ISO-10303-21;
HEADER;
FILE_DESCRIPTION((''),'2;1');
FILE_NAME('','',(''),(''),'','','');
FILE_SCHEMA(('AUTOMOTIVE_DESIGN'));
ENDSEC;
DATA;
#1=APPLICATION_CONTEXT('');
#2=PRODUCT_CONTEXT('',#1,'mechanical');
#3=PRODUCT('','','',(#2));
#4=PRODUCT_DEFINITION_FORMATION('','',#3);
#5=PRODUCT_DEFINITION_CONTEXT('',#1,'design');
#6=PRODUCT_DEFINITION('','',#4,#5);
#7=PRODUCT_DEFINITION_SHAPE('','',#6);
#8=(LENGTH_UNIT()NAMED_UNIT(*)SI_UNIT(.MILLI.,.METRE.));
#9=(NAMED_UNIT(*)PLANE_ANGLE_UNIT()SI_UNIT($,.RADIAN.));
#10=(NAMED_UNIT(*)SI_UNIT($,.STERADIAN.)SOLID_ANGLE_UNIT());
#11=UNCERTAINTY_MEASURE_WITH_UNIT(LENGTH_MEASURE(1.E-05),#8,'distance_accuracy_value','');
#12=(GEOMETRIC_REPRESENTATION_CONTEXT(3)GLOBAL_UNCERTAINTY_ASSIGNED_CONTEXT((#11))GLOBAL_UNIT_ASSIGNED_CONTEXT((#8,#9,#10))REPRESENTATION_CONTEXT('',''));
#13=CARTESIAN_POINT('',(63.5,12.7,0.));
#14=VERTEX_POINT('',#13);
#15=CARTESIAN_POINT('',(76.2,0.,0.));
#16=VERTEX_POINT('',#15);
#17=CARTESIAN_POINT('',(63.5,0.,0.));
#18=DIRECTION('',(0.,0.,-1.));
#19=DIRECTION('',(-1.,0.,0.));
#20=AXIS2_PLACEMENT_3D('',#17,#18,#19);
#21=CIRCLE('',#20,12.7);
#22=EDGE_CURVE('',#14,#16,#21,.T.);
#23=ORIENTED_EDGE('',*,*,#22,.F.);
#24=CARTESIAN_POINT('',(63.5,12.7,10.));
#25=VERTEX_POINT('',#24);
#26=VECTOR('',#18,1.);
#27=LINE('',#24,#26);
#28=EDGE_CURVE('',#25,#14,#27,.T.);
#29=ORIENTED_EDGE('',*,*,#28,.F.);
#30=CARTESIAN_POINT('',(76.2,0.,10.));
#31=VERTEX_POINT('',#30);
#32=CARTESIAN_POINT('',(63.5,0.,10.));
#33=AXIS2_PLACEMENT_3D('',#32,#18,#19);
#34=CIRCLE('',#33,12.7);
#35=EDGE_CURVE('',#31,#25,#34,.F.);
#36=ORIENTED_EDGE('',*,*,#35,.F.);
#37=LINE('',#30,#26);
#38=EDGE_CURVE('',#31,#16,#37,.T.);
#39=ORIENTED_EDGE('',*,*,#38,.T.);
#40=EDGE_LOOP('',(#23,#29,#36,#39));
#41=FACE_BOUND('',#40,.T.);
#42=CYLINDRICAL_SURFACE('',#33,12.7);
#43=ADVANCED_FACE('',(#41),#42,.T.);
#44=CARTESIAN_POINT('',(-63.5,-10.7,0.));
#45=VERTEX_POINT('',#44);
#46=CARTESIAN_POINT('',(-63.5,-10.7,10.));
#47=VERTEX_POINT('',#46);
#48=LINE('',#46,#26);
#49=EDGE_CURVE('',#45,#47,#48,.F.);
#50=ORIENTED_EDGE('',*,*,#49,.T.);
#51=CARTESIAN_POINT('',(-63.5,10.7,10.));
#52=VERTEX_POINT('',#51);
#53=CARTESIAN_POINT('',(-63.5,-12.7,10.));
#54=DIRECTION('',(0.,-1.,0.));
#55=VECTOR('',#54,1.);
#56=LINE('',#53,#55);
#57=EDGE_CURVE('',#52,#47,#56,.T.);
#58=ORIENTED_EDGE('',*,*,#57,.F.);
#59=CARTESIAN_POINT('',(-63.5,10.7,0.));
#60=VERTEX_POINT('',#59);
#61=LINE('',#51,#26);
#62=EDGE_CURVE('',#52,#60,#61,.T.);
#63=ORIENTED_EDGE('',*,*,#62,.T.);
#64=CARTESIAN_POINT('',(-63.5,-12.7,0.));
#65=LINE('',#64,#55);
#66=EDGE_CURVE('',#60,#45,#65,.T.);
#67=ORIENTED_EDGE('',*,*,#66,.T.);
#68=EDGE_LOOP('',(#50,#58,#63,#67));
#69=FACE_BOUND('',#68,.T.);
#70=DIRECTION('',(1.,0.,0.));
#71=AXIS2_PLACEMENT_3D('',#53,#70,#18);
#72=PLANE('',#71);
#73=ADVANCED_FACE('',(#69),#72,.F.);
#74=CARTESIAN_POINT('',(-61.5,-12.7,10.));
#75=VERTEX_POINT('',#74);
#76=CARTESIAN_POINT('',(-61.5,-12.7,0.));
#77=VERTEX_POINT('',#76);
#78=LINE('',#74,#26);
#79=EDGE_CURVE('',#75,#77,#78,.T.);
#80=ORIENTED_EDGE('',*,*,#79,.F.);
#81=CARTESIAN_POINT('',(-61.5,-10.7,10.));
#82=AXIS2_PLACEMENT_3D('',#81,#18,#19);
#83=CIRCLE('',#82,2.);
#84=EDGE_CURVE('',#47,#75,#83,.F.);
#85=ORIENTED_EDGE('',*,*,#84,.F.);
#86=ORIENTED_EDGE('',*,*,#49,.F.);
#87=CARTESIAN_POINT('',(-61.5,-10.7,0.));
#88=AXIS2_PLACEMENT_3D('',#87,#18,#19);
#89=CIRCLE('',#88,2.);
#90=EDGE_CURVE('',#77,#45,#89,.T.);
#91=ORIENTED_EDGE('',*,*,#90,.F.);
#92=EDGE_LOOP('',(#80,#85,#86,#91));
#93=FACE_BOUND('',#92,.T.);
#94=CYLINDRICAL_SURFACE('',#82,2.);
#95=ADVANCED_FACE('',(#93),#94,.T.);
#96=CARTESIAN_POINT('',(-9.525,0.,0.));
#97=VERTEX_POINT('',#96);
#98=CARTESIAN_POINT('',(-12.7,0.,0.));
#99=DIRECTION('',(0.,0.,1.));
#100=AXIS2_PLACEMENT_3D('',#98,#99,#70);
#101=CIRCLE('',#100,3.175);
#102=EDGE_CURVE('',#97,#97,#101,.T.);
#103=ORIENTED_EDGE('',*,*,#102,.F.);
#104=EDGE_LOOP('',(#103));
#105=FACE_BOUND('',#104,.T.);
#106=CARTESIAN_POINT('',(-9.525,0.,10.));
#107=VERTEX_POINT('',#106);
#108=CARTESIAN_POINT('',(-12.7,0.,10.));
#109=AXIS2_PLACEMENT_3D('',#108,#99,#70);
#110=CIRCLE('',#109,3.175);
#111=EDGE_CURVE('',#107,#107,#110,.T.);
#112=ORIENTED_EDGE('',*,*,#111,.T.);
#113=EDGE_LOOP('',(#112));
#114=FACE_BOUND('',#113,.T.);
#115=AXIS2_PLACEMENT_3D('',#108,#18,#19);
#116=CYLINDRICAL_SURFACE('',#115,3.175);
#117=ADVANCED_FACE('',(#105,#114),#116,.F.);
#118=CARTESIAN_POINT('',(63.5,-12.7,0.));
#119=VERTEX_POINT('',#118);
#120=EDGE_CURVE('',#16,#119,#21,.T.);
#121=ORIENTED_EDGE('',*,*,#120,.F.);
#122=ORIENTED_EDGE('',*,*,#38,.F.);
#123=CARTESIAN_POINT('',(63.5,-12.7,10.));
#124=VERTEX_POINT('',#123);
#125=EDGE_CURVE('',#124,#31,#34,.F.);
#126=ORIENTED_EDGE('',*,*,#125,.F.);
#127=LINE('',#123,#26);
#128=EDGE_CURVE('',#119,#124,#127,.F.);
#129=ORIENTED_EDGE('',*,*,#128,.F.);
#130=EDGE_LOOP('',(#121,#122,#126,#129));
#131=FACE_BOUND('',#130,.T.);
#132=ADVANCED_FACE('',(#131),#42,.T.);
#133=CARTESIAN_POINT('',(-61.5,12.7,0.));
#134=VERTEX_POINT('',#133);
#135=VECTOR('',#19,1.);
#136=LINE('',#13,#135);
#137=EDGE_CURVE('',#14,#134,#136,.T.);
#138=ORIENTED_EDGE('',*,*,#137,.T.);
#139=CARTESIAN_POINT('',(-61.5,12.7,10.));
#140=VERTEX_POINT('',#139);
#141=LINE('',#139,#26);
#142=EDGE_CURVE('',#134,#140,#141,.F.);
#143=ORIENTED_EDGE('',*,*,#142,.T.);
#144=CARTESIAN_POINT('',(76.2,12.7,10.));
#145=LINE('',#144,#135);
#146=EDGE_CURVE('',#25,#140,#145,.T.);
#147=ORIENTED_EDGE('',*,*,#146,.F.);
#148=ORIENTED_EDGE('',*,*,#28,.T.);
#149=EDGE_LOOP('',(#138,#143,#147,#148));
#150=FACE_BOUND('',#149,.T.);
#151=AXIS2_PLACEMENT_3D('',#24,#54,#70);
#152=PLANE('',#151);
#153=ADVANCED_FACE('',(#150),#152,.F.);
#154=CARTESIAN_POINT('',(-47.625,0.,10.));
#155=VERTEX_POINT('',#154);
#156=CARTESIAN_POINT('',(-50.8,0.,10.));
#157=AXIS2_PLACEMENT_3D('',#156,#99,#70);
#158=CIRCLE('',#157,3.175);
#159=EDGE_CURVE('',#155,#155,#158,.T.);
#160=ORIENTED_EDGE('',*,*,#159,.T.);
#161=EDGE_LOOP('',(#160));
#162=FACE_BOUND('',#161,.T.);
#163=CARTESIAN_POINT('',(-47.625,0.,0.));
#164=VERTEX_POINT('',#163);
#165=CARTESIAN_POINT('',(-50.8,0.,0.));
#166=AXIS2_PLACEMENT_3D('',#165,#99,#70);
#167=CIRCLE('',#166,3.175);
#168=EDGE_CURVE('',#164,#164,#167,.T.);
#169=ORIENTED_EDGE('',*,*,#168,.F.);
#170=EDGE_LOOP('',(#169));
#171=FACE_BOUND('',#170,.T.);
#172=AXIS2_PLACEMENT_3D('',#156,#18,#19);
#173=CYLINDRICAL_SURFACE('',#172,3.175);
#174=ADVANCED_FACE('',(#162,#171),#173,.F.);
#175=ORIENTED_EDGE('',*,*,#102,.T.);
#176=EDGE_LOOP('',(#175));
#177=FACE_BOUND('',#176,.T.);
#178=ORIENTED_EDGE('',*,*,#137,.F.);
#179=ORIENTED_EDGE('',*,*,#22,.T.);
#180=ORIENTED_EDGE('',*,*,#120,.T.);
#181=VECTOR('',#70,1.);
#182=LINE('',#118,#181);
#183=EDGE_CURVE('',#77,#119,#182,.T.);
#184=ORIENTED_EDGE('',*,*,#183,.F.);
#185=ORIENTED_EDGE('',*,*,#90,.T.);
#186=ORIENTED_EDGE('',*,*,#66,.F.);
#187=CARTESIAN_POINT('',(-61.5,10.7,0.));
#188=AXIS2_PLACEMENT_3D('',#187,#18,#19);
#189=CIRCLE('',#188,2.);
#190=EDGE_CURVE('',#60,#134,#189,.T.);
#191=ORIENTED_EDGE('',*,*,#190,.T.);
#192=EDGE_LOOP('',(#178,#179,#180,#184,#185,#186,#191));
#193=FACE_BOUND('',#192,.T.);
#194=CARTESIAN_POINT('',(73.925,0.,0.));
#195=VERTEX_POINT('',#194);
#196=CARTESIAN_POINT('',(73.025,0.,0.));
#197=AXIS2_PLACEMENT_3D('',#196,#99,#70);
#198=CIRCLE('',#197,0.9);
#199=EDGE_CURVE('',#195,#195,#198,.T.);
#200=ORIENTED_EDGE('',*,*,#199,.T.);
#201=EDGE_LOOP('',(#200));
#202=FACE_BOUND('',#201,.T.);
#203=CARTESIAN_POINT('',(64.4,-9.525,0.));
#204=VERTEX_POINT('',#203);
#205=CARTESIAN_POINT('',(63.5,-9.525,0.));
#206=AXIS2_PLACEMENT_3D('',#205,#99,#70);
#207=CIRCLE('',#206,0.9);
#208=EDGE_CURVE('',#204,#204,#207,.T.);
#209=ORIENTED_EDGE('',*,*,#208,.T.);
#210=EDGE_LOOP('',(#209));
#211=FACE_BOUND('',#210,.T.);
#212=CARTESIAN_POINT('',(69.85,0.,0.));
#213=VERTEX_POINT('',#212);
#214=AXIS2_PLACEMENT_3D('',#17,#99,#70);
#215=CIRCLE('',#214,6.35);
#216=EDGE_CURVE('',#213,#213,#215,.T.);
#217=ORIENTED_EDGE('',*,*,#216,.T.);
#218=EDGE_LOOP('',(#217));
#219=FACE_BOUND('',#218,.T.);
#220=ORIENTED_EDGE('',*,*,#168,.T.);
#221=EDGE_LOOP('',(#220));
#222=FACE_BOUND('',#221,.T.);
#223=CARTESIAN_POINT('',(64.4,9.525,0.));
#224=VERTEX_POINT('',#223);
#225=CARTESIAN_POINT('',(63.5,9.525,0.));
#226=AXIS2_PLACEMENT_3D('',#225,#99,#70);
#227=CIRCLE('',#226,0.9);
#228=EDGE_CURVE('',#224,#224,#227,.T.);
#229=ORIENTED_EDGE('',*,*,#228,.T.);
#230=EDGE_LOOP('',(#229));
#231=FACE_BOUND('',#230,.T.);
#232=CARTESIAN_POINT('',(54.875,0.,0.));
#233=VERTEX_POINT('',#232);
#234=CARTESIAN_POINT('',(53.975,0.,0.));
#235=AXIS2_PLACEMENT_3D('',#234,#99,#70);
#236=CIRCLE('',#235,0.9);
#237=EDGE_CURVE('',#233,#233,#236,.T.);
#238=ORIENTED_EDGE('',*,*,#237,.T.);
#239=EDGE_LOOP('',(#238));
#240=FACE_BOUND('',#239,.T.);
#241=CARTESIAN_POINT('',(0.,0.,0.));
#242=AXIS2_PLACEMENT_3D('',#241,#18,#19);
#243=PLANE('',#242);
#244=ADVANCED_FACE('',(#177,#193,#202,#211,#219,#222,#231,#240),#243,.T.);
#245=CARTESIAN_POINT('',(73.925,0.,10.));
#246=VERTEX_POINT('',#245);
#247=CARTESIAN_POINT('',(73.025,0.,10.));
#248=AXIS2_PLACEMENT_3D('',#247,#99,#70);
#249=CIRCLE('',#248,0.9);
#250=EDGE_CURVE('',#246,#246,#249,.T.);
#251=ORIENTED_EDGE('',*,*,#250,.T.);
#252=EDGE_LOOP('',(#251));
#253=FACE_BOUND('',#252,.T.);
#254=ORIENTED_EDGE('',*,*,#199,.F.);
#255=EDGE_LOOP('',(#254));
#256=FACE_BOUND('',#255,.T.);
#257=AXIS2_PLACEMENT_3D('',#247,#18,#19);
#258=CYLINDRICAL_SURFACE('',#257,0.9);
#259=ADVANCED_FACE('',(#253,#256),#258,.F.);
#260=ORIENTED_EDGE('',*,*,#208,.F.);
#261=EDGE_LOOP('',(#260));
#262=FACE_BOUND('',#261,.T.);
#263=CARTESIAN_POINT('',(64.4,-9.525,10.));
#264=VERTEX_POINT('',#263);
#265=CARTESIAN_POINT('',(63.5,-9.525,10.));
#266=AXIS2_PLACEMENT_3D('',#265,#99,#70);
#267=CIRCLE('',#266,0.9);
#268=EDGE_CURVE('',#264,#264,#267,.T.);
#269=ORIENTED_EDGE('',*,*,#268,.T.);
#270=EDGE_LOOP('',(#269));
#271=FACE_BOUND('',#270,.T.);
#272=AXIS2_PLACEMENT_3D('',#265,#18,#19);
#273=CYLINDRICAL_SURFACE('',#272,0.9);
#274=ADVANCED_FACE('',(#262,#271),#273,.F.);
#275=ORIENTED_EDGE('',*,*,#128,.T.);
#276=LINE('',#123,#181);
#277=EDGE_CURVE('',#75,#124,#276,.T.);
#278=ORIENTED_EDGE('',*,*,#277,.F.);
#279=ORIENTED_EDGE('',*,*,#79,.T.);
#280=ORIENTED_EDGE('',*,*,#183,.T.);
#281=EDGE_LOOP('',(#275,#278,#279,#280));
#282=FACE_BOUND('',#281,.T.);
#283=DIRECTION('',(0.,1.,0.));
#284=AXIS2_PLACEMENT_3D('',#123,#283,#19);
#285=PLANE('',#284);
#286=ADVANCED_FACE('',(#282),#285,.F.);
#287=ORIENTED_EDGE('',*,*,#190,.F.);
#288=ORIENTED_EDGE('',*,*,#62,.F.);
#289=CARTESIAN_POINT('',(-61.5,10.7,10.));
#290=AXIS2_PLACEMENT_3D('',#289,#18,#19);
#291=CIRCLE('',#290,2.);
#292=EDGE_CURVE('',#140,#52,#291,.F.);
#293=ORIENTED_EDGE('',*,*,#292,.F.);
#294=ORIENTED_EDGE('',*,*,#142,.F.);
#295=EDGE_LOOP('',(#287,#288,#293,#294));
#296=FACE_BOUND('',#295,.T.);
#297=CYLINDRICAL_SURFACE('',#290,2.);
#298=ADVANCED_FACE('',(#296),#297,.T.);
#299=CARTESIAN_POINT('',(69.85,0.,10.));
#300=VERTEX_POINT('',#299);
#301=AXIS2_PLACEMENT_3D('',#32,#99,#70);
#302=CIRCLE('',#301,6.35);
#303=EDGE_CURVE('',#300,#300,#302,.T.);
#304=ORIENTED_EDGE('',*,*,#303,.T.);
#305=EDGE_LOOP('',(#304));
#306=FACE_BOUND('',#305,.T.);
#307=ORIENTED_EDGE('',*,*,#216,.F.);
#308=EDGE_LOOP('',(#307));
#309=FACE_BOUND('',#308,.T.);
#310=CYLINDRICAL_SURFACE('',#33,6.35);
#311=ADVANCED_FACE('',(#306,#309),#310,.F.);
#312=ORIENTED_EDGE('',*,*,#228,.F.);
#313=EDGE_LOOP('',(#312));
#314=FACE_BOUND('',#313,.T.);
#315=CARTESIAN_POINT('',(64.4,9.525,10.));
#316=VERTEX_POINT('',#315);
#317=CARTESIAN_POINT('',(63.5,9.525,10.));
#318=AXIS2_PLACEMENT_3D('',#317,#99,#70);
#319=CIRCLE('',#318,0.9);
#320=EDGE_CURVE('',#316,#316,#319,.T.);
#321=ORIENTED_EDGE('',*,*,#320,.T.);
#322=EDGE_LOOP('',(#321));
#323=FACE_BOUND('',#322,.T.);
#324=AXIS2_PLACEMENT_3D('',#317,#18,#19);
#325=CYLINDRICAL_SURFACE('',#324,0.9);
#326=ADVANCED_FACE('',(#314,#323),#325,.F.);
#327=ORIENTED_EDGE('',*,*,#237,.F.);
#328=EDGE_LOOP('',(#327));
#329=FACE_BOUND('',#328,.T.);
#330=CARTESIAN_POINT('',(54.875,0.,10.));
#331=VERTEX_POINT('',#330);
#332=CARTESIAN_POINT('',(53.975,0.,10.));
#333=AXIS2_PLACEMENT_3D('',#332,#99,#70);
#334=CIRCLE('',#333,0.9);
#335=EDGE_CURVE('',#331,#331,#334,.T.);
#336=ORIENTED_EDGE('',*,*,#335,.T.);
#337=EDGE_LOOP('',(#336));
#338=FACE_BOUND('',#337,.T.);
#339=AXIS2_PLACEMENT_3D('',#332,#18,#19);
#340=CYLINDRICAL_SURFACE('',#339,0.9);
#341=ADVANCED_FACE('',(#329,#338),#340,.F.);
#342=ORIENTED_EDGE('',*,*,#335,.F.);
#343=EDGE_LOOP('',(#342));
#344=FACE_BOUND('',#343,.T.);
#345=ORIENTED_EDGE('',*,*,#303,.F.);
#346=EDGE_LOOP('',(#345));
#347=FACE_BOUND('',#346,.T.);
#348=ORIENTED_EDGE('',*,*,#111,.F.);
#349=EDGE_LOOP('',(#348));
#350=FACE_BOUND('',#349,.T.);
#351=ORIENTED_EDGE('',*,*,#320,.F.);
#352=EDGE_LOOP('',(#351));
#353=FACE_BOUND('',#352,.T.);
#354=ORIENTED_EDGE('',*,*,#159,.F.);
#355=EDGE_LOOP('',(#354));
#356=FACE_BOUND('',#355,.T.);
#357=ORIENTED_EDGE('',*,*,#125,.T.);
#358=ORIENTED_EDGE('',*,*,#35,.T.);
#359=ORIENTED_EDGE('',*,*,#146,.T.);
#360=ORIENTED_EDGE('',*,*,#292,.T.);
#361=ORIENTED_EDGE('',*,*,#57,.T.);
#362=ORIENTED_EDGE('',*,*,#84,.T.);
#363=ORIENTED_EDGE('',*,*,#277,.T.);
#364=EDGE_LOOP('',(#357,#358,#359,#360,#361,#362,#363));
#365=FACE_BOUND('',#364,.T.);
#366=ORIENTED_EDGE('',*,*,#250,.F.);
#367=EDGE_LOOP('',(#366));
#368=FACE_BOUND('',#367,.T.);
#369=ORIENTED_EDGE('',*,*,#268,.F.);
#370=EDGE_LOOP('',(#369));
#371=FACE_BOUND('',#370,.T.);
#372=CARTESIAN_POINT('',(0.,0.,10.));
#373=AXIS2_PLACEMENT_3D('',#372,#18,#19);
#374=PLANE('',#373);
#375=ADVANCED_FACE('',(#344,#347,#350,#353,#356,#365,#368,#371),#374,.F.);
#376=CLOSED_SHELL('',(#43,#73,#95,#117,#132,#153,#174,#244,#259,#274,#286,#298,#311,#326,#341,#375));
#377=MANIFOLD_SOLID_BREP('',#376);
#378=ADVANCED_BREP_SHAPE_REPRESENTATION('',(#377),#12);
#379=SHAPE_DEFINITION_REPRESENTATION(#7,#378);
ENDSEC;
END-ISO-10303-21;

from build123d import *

# Parameters (mm, degrees)
SKETCH1_R           = 3.175
SKETCH1_R_2         = 6.35
SKETCH1_R_3         = 0.9
BOSS_EXTRUDE1_DEPTH = 10
FILLET2_R           = 2
FILLET3_R           = 12.7


with BuildPart() as part:
    # Sketch1 → Boss-Extrude1 (new body)
    with BuildSketch(Plane.XY):
        Polygon((-63.5, -12.7), (-63.5, 12.7), (63.5, 12.7), (76.2, 12.7), (76.2, -12.7), (63.5, -12.7), align=None)
        with Locations((-50.8, 0)):
            Circle(SKETCH1_R, mode=Mode.SUBTRACT)
        with Locations((63.5, 0)):
            Circle(SKETCH1_R_2, mode=Mode.SUBTRACT)
        with Locations((63.5, 9.525)):
            Circle(SKETCH1_R_3, mode=Mode.SUBTRACT)
        with Locations((63.5, -9.525)):
            Circle(SKETCH1_R_3, mode=Mode.SUBTRACT)
        with Locations((53.975, 0)):
            Circle(SKETCH1_R_3, mode=Mode.SUBTRACT)
        with Locations((73.025, 0)):
            Circle(SKETCH1_R_3, mode=Mode.SUBTRACT)
        with Locations((-12.7, 0)):
            Circle(SKETCH1_R, mode=Mode.SUBTRACT)
    extrude(amount=BOSS_EXTRUDE1_DEPTH)

    # Fillet2
    fillet2_edges = [part.edges().sort_by_distance(p)[0] for p in [
        (-63.5, -12.7, 5),
        (-63.5, 12.7, 5),
    ]]
    fillet(fillet2_edges, radius=FILLET2_R)

    # Fillet3
    fillet3_edges = [part.edges().sort_by_distance(p)[0] for p in [
        (76.2, 12.7, 5),
        (76.2, -12.7, 5),
    ]]
    fillet(fillet3_edges, radius=FILLET3_R - 0.0001)  # a hair under: the kernel refuses the full size


solid = part.part
